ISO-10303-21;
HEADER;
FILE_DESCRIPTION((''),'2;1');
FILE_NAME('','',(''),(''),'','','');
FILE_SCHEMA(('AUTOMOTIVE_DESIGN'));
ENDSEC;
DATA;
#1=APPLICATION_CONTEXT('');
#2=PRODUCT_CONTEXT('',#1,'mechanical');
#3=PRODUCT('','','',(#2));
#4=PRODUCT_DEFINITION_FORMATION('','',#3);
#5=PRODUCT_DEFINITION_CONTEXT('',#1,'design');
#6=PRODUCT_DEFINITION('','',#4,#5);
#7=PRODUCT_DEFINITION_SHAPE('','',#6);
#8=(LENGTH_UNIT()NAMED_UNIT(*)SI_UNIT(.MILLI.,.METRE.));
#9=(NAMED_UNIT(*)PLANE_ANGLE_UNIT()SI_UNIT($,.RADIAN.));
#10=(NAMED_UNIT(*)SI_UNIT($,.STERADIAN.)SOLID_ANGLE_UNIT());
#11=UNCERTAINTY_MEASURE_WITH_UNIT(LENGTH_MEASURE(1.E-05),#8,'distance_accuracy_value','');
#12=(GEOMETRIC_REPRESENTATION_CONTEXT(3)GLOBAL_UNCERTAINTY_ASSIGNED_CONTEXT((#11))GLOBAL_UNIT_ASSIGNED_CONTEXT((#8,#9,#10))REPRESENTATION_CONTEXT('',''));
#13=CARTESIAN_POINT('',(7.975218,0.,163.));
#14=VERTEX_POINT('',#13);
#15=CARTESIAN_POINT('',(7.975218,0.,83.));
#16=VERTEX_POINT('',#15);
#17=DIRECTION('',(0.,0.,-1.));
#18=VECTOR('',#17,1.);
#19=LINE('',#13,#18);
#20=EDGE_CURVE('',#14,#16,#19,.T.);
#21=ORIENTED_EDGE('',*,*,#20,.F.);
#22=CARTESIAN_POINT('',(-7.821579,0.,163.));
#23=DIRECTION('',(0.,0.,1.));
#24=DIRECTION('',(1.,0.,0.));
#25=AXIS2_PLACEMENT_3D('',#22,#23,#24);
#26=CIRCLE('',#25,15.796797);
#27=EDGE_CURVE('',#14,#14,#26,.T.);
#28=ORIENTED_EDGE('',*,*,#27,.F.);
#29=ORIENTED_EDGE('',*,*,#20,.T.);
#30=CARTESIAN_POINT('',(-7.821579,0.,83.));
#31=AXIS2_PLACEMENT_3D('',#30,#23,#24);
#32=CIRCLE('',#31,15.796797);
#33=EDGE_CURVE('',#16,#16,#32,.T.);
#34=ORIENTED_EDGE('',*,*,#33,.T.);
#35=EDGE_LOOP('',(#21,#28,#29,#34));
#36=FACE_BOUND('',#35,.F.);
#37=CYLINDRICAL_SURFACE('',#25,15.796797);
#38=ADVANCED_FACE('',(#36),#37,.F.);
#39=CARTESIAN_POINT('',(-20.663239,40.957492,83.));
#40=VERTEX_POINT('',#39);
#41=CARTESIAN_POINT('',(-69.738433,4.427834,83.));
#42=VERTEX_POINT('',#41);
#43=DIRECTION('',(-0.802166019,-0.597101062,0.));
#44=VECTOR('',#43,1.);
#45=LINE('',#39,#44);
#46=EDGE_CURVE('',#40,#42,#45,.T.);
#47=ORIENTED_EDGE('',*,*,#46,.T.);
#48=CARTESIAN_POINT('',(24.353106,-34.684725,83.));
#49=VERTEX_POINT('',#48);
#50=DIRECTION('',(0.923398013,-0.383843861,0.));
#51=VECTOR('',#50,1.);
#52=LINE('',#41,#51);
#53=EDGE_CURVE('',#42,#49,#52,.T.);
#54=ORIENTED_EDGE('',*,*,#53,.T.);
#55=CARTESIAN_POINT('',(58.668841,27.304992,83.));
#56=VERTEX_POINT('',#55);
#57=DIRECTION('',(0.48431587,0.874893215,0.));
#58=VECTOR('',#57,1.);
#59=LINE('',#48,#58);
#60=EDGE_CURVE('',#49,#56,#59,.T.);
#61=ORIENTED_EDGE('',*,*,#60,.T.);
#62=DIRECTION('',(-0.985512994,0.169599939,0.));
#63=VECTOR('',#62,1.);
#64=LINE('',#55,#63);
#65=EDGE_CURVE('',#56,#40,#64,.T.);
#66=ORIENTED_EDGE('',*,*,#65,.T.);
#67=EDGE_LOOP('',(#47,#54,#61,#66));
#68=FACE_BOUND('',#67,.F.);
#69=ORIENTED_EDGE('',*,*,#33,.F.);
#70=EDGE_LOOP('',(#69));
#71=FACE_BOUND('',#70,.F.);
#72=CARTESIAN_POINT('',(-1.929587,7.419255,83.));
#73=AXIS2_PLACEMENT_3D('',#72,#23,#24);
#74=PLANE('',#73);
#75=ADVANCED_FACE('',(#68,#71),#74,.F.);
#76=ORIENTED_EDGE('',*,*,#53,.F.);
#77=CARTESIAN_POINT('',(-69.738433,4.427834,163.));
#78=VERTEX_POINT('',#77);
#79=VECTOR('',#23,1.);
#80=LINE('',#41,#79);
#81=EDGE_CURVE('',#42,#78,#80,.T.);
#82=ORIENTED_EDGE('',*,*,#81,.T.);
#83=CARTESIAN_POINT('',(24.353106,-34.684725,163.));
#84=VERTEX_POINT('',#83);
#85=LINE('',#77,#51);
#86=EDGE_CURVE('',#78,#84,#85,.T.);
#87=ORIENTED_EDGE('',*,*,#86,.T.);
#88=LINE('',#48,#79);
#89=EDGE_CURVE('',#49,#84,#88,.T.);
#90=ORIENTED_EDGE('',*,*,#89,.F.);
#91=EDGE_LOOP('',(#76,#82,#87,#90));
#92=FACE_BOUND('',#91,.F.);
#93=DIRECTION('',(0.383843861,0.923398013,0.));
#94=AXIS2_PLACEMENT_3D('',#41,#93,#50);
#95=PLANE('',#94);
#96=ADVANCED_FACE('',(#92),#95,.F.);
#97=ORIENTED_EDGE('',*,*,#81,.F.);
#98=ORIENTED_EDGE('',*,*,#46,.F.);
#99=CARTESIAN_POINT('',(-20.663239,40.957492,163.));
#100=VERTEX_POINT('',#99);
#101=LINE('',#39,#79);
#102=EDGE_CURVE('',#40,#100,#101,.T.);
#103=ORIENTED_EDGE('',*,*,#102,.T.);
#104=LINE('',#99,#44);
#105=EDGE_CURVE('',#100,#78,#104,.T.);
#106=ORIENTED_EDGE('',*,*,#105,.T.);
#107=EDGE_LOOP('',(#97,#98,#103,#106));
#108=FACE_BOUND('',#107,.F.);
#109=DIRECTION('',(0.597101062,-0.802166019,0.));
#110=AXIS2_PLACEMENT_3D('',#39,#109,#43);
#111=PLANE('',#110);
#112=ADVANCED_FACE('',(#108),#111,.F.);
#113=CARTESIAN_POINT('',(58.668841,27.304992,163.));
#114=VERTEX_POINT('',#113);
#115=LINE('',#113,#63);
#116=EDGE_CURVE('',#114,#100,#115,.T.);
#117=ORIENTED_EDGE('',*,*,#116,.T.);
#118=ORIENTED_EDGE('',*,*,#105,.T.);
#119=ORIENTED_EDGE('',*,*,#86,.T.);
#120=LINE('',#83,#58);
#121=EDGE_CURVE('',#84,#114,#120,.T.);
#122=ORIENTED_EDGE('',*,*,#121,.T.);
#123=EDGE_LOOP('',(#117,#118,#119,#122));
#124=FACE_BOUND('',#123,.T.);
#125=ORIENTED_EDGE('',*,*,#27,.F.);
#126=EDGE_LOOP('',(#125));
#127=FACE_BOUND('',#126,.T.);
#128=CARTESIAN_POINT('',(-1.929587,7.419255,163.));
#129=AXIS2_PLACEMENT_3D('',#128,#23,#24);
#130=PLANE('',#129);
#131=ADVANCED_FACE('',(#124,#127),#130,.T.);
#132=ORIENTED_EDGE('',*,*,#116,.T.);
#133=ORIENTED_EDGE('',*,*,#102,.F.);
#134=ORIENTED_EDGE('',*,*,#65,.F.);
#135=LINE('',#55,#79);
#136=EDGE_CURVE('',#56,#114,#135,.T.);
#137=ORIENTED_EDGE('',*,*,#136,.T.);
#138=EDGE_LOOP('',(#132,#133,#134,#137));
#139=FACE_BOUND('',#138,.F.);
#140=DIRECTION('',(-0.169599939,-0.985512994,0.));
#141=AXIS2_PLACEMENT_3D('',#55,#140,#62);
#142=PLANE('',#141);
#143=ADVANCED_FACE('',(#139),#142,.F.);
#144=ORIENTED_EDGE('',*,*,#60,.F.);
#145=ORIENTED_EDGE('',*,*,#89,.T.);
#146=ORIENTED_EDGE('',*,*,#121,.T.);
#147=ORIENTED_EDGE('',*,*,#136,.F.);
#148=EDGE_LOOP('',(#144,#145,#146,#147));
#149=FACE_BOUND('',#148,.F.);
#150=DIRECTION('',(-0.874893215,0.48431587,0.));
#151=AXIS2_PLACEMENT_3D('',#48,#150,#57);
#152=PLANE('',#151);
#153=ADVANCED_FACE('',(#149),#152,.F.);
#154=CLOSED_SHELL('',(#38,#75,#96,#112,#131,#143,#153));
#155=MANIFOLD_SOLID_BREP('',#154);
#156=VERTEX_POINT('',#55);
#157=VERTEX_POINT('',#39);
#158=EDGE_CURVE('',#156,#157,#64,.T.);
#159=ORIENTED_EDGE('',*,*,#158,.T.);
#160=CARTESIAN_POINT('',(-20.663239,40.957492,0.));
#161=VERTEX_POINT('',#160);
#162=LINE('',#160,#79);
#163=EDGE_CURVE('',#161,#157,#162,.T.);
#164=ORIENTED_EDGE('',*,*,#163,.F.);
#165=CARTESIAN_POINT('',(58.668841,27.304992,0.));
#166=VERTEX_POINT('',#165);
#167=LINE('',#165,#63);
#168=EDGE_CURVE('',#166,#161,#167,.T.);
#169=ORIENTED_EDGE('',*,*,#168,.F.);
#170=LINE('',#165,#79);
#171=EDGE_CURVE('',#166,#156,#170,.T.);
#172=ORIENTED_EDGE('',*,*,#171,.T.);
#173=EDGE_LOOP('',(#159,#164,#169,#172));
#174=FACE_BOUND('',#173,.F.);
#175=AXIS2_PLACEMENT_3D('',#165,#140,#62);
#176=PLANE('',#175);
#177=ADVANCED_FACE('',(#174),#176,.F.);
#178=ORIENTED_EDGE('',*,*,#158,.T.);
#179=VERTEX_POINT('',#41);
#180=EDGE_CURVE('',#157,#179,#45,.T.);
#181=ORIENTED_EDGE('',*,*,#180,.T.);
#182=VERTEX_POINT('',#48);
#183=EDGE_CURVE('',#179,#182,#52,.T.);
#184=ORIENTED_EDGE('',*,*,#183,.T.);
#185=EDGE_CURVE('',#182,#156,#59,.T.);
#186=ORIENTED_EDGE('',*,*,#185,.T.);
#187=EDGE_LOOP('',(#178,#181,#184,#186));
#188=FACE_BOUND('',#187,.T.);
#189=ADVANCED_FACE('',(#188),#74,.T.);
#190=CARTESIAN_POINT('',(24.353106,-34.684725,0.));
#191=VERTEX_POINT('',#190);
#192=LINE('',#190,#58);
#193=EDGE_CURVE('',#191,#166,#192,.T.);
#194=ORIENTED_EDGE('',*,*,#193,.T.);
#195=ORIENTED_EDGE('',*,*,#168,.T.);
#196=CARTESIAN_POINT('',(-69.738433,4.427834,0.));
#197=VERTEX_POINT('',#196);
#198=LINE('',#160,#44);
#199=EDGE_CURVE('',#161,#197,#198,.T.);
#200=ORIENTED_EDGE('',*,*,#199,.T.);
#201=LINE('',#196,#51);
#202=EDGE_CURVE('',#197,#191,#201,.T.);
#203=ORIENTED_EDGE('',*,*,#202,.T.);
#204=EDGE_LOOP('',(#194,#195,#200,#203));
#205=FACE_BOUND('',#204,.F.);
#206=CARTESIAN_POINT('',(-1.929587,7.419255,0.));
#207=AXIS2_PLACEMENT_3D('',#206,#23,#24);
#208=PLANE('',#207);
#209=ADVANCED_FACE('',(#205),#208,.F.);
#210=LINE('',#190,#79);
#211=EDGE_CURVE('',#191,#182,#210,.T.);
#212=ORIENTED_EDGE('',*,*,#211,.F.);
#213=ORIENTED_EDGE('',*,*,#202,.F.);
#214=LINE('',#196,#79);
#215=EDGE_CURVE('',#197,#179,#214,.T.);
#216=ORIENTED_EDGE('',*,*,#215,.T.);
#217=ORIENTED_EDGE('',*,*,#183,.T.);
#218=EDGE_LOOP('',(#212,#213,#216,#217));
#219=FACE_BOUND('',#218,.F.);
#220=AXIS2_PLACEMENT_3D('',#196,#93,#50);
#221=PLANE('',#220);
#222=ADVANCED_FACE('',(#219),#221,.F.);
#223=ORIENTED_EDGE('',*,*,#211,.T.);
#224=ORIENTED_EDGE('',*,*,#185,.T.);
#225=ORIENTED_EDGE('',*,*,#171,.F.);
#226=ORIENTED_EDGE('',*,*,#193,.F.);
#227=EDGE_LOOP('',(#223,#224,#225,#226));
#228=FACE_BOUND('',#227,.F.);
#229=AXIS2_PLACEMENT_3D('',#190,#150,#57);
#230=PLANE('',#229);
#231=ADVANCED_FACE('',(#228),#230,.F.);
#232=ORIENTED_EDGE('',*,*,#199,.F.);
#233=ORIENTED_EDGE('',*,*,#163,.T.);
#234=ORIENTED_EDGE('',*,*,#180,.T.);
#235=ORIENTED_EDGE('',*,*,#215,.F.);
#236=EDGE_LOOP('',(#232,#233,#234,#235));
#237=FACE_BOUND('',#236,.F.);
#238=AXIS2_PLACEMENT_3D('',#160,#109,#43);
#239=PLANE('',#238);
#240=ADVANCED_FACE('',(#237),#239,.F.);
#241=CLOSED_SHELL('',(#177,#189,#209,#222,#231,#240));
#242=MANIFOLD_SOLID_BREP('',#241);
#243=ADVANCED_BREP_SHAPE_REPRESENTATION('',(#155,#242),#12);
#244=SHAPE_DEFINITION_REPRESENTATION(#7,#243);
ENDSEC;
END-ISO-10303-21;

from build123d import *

# Parameters (mm, degrees)
F1_DEPTH = 83
F3_DEPTH = 80
F4_R     = 15.7967970704
F5_DEPTH = 261


# Not quite as in the source:
# - the program builds the solid bodies; features that only make, move or delete a surface that nothing else refers to are left out


with BuildPart() as f1:
    # F0 (on Top) → F1 (new body)
    with BuildSketch(Plane.XY):
        Polygon((-20.6632390618, 40.9574918449), (-69.738432765, 4.4278339483), (24.3531055748, -34.6847251058), (58.6688406765, 27.3049920797), align=None)
    extrude(amount=F1_DEPTH)


with BuildPart() as f3:
    # F3 (new): a face of the model
    f3_faces = [f1.part.faces().sort_by_distance(p)[0] for p in [
        (-0.5558487056, 7.3902608485, 83),
    ]]
    extrude(f3_faces, amount=F3_DEPTH)

    # F4 (on face) → F5 (cut)
    with BuildSketch(Plane.XY.offset(163)):
        with Locations((-7.8215794638, 0)):
            Circle(F4_R)
    extrude(amount=-F5_DEPTH, mode=Mode.SUBTRACT)


solid = Compound([f1.part, f3.part])
